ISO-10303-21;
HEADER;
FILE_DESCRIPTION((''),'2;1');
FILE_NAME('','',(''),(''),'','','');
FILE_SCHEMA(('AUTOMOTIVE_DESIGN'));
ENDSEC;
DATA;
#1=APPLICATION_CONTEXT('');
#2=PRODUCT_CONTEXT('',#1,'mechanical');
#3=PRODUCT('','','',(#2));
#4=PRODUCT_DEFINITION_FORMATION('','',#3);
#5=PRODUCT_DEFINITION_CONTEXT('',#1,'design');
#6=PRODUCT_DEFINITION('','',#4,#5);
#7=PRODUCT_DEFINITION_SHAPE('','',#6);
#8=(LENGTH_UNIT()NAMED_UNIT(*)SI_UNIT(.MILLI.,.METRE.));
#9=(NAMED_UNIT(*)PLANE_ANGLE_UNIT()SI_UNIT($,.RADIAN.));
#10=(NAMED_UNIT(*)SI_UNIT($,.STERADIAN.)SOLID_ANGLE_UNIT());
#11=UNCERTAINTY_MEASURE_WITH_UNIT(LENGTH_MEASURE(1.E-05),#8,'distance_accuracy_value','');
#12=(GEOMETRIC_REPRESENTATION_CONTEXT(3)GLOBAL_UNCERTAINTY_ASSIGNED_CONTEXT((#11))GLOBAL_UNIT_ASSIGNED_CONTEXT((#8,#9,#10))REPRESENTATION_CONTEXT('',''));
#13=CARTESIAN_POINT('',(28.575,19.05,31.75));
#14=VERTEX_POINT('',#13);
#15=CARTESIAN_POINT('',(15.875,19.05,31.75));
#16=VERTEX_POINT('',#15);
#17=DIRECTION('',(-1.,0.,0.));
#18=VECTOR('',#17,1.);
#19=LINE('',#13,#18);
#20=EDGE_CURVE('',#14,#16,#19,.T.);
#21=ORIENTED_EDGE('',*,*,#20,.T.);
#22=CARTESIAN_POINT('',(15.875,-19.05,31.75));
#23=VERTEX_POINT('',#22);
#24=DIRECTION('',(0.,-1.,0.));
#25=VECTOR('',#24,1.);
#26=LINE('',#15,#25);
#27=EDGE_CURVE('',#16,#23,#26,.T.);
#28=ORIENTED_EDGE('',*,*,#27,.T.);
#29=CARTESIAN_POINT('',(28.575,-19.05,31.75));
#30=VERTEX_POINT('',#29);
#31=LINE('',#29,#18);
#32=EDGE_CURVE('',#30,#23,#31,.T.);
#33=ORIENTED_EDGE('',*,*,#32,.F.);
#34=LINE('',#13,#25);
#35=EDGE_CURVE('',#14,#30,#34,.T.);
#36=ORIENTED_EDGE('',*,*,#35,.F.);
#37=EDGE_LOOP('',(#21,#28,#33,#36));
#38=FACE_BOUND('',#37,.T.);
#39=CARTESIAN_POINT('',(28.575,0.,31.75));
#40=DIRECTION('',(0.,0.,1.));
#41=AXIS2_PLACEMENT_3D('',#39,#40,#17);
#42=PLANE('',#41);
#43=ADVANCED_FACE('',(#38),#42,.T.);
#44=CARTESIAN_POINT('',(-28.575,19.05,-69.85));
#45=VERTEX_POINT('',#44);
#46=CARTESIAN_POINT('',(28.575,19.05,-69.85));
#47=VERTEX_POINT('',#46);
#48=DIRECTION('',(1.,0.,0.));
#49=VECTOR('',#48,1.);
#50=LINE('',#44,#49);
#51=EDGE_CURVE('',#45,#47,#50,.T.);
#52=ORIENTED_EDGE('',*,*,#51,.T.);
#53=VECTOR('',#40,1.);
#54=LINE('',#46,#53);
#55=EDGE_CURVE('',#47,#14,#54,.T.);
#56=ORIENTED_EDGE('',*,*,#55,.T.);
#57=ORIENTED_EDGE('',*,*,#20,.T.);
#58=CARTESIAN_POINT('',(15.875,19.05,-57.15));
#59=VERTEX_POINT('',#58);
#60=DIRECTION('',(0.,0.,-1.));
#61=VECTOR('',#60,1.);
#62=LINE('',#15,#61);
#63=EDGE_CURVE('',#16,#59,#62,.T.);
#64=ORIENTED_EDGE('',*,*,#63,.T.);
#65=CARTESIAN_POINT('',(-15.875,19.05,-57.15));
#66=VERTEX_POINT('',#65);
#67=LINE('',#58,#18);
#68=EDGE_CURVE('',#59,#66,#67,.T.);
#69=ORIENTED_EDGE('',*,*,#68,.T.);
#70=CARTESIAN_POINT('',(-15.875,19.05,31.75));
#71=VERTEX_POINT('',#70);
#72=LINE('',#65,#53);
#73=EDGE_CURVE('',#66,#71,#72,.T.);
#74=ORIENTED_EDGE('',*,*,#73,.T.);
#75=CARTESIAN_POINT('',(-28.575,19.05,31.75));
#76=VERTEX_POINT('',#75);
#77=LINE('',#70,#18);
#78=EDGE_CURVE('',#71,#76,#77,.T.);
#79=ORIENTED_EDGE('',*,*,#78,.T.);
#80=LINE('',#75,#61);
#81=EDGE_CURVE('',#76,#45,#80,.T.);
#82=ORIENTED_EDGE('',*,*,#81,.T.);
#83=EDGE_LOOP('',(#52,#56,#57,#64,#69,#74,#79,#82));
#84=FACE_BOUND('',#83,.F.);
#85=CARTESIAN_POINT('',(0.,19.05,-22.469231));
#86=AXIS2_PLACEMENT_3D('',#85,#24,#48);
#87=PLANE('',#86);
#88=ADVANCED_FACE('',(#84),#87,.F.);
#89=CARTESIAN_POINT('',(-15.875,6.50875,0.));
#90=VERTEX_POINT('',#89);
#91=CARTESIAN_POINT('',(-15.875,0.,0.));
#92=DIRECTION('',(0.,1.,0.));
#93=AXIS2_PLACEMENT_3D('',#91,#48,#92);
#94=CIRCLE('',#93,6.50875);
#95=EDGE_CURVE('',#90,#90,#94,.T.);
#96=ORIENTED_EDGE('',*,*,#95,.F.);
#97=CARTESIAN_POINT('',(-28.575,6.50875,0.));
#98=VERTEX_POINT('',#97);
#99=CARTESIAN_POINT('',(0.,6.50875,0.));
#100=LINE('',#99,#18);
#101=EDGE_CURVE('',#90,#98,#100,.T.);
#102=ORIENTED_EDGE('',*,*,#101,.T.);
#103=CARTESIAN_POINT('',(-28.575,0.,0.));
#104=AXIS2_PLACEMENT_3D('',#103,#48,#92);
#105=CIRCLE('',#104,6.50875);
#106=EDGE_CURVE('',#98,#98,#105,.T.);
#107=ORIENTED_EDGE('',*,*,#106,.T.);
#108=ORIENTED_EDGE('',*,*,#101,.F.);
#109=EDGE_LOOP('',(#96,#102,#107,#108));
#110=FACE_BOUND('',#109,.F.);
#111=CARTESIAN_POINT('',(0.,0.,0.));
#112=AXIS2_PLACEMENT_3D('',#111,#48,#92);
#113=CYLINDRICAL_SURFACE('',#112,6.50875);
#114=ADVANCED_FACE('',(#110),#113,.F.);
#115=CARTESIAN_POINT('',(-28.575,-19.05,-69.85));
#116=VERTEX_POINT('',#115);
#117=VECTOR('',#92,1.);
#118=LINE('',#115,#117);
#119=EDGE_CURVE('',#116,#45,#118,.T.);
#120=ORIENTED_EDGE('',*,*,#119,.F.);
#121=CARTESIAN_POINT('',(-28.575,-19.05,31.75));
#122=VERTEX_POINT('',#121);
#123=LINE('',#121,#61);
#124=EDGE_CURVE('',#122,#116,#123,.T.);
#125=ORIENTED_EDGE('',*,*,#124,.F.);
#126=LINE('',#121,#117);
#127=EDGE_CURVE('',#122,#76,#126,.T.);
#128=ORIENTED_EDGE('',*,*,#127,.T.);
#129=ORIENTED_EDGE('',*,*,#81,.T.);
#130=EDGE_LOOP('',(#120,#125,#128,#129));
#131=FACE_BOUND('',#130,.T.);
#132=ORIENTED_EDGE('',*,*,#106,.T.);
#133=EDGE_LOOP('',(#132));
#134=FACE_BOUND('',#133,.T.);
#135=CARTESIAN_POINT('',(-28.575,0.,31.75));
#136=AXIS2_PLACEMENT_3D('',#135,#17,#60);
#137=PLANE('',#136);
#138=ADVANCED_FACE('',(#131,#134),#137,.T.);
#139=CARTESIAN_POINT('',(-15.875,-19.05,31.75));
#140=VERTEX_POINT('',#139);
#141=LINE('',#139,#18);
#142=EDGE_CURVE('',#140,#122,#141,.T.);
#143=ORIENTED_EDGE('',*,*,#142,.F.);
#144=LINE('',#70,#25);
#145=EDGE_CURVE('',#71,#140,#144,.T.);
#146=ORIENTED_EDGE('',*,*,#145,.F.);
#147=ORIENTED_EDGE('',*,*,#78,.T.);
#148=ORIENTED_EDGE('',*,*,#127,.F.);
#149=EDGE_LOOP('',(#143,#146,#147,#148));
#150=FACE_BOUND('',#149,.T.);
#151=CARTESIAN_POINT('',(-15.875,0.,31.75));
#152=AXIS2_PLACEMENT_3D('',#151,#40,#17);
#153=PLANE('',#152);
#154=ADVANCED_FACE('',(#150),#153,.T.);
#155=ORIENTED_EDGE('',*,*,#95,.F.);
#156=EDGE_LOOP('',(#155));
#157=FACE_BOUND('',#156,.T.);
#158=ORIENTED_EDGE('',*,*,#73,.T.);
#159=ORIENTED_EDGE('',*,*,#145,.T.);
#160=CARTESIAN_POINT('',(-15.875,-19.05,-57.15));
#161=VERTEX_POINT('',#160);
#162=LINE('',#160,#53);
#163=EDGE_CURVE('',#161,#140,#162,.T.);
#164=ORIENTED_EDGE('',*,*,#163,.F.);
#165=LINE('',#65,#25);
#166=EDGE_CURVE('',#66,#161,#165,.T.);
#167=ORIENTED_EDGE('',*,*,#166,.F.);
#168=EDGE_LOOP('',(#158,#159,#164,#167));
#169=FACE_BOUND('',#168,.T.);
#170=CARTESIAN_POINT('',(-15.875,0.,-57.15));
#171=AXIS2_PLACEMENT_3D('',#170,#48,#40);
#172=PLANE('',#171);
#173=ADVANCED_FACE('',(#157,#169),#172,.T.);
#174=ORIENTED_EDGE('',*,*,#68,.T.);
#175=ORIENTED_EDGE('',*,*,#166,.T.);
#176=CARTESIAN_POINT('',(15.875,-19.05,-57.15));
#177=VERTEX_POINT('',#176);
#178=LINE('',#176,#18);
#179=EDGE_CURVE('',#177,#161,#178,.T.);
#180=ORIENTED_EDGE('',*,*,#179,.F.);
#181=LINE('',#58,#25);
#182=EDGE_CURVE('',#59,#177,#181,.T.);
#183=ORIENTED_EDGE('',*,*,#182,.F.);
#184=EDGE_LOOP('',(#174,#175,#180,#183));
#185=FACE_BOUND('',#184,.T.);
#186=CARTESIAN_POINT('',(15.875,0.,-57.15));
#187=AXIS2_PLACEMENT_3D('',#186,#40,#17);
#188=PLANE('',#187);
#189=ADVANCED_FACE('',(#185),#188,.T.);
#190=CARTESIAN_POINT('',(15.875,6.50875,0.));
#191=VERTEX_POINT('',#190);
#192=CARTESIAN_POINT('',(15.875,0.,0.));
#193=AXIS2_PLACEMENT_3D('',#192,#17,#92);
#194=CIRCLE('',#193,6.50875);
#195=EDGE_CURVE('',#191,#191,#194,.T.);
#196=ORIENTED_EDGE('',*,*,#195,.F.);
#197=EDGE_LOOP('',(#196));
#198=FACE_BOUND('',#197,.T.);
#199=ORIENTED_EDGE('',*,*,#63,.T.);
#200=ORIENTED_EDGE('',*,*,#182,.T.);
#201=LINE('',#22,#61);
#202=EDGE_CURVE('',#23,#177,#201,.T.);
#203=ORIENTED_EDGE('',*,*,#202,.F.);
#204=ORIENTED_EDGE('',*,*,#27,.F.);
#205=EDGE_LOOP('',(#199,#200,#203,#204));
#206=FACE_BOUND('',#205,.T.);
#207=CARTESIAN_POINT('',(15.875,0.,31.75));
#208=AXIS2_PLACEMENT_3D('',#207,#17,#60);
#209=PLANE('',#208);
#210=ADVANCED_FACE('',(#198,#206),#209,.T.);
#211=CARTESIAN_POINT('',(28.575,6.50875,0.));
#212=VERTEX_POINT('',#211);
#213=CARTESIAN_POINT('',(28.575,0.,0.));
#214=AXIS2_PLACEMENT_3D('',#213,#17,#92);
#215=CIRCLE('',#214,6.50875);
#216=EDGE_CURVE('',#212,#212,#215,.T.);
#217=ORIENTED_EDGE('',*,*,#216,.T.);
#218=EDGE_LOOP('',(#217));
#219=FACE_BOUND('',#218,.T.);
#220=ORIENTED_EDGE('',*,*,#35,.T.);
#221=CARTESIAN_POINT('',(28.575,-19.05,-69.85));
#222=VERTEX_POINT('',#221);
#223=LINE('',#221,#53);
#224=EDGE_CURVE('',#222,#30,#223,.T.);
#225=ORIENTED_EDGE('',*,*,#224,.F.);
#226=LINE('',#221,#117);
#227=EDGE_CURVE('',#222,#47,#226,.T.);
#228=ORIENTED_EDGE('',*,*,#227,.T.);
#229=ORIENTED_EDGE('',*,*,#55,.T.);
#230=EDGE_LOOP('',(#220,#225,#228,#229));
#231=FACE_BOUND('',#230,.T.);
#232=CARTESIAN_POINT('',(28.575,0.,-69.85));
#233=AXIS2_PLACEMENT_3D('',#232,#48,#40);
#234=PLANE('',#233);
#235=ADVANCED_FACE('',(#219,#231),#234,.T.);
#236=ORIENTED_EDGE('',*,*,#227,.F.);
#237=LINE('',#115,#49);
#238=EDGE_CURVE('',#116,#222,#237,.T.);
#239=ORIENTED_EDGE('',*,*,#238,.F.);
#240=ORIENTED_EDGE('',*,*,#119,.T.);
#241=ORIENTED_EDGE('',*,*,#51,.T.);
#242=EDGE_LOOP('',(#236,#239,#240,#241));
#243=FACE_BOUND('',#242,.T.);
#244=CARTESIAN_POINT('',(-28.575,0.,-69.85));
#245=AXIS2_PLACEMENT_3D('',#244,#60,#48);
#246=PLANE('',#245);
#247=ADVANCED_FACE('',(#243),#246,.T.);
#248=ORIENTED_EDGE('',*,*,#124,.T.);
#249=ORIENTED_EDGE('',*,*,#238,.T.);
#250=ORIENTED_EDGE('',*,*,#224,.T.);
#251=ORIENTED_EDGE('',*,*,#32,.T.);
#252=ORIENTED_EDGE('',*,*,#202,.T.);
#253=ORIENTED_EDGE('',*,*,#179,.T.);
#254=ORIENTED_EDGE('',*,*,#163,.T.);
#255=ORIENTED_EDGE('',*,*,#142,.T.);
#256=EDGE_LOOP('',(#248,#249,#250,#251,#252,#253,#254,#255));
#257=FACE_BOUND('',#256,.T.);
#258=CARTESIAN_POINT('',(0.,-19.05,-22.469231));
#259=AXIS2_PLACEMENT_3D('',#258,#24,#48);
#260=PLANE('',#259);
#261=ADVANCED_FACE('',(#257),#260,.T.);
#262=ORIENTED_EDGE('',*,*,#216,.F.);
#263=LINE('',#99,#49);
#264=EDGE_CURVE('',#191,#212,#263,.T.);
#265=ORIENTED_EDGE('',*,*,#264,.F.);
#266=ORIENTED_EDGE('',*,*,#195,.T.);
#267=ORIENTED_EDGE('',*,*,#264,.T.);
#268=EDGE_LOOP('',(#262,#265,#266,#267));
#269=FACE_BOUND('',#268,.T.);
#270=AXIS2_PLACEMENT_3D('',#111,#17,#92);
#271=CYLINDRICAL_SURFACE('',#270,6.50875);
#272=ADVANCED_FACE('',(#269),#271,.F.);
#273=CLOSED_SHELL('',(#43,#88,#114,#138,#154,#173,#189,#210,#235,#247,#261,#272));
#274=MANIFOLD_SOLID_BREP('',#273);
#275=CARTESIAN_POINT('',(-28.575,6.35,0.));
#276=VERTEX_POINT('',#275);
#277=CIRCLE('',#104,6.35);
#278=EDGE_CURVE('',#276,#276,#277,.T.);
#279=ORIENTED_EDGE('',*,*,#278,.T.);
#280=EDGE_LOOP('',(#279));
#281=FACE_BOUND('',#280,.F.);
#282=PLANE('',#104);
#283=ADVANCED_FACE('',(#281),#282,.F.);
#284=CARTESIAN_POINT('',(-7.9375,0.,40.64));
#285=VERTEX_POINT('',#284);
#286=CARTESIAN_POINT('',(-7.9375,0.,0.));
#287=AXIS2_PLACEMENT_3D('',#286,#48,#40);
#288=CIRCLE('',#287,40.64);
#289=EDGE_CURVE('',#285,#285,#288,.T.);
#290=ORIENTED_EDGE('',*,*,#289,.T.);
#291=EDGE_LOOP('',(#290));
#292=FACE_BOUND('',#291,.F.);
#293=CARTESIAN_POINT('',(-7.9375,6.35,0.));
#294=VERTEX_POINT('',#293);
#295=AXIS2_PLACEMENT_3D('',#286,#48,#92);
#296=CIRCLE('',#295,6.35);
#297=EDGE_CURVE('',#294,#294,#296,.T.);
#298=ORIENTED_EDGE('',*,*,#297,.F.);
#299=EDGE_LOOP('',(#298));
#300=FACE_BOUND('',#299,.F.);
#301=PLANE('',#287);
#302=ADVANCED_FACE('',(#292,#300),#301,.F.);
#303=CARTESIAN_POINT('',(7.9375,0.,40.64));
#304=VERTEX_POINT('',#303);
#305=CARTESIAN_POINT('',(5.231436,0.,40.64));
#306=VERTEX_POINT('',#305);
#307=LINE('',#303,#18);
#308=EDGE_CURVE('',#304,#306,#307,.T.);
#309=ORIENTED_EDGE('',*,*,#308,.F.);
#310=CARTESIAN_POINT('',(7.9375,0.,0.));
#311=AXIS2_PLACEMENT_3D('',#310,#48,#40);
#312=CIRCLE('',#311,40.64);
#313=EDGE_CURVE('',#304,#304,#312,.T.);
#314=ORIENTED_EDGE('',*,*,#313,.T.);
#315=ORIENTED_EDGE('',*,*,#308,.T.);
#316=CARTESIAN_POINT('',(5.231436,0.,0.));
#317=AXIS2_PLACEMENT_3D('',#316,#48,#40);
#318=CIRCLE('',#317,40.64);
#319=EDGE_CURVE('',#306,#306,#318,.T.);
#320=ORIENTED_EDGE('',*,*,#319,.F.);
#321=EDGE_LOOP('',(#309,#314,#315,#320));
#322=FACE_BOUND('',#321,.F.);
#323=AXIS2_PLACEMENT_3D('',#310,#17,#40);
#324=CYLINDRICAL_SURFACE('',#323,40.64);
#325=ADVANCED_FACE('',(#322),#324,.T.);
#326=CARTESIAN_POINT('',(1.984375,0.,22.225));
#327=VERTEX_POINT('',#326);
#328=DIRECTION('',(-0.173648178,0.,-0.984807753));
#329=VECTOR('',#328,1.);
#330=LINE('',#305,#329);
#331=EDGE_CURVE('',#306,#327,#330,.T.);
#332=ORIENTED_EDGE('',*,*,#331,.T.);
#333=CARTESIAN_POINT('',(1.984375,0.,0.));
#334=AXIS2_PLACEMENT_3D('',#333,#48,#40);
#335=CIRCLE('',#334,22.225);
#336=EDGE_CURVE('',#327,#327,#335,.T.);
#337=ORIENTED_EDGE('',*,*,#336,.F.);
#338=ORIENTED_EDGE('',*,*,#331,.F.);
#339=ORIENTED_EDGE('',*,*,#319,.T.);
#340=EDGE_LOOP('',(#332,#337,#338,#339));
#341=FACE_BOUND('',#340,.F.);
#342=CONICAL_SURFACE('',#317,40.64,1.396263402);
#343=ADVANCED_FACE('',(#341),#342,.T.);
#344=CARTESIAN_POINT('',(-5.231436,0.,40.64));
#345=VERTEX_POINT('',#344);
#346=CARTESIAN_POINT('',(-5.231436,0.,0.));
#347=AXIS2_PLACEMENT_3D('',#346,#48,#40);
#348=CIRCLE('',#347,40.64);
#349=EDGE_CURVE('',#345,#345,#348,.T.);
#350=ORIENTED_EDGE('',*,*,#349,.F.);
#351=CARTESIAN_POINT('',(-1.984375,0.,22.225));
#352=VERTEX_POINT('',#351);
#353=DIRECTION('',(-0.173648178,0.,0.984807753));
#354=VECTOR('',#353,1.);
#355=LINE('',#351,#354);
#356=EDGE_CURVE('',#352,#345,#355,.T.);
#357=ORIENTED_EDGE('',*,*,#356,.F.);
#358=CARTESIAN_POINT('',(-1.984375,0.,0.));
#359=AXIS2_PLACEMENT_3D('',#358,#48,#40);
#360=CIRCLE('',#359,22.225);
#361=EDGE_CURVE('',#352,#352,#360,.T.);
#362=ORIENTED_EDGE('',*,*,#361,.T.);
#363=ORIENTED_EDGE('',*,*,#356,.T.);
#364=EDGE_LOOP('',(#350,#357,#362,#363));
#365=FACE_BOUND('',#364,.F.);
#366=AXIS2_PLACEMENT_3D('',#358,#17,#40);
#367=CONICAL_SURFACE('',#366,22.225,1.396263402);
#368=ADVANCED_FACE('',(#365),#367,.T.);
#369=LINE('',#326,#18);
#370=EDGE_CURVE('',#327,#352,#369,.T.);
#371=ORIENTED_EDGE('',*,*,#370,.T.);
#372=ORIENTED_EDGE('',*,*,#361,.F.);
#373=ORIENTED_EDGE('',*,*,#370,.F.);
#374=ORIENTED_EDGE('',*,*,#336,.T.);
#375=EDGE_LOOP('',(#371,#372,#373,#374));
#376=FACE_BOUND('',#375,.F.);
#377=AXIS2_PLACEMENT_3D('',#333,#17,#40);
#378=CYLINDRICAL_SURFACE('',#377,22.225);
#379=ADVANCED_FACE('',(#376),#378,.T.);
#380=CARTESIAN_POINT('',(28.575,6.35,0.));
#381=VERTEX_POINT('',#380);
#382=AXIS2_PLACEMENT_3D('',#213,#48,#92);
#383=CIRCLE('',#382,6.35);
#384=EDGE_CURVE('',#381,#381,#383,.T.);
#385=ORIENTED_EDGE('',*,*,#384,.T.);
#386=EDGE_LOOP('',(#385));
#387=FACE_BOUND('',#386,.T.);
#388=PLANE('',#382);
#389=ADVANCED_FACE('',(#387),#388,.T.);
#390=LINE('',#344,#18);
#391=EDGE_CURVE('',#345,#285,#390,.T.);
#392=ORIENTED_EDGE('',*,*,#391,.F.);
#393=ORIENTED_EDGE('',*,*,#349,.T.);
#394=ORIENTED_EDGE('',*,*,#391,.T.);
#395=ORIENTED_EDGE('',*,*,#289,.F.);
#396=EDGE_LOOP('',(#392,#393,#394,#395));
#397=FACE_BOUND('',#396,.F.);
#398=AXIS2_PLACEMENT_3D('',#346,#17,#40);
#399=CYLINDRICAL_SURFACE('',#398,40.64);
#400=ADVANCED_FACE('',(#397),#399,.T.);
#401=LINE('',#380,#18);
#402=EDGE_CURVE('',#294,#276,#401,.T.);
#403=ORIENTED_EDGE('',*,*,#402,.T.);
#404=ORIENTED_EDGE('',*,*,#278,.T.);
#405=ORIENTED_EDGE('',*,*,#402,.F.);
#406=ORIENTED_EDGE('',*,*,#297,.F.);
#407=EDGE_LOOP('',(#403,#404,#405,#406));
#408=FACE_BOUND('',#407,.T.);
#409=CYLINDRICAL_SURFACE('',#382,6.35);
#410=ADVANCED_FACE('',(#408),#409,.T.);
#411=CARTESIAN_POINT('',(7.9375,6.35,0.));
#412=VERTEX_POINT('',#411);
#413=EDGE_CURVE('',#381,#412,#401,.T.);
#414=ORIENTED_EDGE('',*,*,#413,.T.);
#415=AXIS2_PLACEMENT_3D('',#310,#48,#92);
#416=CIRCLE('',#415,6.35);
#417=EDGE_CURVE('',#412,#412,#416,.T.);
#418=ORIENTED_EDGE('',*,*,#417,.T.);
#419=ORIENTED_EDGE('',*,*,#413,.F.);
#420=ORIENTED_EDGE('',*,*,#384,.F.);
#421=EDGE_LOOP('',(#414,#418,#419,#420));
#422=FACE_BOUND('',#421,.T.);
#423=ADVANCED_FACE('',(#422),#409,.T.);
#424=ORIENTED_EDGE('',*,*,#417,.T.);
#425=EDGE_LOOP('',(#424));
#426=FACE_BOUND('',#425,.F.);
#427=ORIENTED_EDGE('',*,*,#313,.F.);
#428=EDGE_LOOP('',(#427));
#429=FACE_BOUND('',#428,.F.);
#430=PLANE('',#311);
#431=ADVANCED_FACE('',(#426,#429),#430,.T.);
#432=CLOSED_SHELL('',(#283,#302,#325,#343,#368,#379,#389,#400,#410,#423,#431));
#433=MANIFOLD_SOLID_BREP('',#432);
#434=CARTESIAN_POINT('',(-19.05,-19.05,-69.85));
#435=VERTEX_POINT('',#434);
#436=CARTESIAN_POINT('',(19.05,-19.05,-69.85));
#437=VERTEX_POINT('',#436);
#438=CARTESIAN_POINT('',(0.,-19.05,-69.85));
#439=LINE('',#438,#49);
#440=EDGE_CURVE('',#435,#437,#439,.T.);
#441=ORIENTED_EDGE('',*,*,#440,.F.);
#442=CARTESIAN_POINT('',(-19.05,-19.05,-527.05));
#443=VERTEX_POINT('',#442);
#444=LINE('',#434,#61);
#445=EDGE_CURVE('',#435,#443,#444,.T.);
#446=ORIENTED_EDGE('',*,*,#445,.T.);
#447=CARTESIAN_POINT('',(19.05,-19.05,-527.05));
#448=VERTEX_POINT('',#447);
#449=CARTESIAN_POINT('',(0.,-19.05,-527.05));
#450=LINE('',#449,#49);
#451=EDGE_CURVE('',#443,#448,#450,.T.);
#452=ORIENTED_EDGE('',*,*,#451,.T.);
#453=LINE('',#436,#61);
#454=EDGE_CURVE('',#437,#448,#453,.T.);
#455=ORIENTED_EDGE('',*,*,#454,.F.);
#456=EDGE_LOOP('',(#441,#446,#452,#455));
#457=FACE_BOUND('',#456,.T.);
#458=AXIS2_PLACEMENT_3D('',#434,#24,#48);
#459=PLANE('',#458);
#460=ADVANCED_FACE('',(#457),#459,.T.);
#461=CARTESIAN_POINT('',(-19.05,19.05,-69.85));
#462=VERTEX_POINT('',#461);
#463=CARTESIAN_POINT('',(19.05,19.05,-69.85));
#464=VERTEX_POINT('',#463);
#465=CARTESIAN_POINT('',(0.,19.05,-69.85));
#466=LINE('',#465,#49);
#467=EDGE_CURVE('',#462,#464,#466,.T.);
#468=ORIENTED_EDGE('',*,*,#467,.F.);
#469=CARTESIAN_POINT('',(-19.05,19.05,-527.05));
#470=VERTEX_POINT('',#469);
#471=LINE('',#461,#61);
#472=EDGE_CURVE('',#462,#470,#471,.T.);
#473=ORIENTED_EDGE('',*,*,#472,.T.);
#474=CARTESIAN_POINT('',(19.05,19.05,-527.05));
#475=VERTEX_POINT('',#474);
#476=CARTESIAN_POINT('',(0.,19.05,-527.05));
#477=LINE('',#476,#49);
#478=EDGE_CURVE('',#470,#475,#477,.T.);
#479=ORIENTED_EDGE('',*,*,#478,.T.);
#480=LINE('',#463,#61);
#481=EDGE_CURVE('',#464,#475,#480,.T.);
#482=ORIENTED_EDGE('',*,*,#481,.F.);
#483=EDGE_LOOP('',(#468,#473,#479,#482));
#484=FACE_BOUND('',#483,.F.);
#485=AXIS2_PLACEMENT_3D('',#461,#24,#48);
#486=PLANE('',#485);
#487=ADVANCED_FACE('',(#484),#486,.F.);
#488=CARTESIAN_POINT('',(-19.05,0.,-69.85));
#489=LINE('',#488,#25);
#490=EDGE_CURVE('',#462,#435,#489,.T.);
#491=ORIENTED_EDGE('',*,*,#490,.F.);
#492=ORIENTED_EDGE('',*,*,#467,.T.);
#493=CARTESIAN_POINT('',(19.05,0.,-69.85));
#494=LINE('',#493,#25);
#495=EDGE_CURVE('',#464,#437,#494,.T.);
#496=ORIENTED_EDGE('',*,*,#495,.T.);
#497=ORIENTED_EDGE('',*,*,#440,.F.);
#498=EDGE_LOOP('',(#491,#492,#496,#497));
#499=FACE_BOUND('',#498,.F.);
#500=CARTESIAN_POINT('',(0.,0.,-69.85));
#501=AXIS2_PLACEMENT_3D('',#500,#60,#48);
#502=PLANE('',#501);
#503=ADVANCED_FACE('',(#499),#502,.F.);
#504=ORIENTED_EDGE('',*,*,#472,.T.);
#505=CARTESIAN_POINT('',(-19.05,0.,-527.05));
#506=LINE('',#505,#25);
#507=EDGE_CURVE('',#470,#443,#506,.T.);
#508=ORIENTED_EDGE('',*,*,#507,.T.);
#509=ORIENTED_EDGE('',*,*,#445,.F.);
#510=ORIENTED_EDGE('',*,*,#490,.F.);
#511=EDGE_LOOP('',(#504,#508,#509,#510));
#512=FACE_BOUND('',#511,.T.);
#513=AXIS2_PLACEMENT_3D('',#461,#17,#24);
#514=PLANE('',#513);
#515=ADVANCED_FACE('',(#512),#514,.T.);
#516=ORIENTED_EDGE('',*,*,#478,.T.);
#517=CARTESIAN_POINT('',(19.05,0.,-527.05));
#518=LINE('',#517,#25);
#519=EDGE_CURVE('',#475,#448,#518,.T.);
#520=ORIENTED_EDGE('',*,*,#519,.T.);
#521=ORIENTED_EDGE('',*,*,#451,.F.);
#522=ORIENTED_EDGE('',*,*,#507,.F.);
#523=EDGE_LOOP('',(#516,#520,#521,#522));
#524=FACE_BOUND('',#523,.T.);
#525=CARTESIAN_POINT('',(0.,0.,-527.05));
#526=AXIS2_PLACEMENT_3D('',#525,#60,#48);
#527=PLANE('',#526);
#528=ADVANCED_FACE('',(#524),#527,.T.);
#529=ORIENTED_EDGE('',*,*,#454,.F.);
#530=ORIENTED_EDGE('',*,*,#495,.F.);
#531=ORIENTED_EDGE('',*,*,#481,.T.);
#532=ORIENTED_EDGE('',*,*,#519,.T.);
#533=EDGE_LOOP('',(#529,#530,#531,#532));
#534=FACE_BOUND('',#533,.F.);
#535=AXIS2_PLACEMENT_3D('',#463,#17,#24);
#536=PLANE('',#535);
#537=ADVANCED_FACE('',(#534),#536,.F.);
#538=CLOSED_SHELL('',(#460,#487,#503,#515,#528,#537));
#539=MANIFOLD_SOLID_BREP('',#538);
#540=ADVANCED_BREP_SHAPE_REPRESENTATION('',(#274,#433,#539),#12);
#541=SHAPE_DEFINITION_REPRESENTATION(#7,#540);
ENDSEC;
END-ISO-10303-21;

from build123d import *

# Parameters (mm, degrees)
F3_DEPTH      = 19.05
F4_R          = 6.50875
F5_DEPTH      = 28.576
F5_DEPTH_BACK = 28.576
F6_W          = 38.1
F6_H          = 38.1
F7_DEPTH      = 457.2
F8_R          = 6.35
F9_DEPTH      = 57.15


with BuildPart() as f1:
    # F0 (on Front) → F1 (revolve)
    with BuildSketch(Plane.XZ):
        Polygon((0, 6.35), (0, 22.225), (-1.984375, 22.225), (-5.2314363497, 40.64), (-7.9375, 40.64), (-7.9375, 6.35), align=None)
        Polygon((1.984375, 22.225), (0, 22.225), (0, 6.35), (7.9375, 6.35), (7.9375, 40.64), (5.2314363497, 40.64), align=None)
    revolve(axis=Axis((0, 0, 0), (1, 0, 0)))

    # F8 (on face) → F9 (join)
    with BuildSketch(Plane.YZ.offset(28.575)):
        Circle(F8_R)
    extrude(amount=-F9_DEPTH)


with BuildPart() as f3:
    # F2 (on Front) → F3 (new body, symmetric)
    with BuildSketch(Plane.XZ):
        Polygon((28.575, -69.85), (28.575, 31.75), (15.875, 31.75), (15.875, -57.15), (-15.875, -57.15), (-15.875, 31.75), (-28.575, 31.75), (-28.575, -69.85), align=None)
    extrude(amount=F3_DEPTH, both=True)

    # F4 (on Right) → F5 (cut, two sides)
    with BuildSketch(Plane.YZ) as f5_sk:
        Circle(F4_R)
    extrude(amount=-F5_DEPTH, mode=Mode.SUBTRACT)
    extrude(f5_sk.sketch, amount=F5_DEPTH_BACK, mode=Mode.SUBTRACT)


with BuildPart() as f7:
    # F6 (on face) → F7 (new body)
    with BuildSketch(Plane(origin=(0, 0, -69.85), x_dir=(1, 0, 0), z_dir=(0, 0, -1))):
        Rectangle(F6_W, F6_H)
    extrude(amount=F7_DEPTH)


solid = Compound([f1.part, f3.part, f7.part])
